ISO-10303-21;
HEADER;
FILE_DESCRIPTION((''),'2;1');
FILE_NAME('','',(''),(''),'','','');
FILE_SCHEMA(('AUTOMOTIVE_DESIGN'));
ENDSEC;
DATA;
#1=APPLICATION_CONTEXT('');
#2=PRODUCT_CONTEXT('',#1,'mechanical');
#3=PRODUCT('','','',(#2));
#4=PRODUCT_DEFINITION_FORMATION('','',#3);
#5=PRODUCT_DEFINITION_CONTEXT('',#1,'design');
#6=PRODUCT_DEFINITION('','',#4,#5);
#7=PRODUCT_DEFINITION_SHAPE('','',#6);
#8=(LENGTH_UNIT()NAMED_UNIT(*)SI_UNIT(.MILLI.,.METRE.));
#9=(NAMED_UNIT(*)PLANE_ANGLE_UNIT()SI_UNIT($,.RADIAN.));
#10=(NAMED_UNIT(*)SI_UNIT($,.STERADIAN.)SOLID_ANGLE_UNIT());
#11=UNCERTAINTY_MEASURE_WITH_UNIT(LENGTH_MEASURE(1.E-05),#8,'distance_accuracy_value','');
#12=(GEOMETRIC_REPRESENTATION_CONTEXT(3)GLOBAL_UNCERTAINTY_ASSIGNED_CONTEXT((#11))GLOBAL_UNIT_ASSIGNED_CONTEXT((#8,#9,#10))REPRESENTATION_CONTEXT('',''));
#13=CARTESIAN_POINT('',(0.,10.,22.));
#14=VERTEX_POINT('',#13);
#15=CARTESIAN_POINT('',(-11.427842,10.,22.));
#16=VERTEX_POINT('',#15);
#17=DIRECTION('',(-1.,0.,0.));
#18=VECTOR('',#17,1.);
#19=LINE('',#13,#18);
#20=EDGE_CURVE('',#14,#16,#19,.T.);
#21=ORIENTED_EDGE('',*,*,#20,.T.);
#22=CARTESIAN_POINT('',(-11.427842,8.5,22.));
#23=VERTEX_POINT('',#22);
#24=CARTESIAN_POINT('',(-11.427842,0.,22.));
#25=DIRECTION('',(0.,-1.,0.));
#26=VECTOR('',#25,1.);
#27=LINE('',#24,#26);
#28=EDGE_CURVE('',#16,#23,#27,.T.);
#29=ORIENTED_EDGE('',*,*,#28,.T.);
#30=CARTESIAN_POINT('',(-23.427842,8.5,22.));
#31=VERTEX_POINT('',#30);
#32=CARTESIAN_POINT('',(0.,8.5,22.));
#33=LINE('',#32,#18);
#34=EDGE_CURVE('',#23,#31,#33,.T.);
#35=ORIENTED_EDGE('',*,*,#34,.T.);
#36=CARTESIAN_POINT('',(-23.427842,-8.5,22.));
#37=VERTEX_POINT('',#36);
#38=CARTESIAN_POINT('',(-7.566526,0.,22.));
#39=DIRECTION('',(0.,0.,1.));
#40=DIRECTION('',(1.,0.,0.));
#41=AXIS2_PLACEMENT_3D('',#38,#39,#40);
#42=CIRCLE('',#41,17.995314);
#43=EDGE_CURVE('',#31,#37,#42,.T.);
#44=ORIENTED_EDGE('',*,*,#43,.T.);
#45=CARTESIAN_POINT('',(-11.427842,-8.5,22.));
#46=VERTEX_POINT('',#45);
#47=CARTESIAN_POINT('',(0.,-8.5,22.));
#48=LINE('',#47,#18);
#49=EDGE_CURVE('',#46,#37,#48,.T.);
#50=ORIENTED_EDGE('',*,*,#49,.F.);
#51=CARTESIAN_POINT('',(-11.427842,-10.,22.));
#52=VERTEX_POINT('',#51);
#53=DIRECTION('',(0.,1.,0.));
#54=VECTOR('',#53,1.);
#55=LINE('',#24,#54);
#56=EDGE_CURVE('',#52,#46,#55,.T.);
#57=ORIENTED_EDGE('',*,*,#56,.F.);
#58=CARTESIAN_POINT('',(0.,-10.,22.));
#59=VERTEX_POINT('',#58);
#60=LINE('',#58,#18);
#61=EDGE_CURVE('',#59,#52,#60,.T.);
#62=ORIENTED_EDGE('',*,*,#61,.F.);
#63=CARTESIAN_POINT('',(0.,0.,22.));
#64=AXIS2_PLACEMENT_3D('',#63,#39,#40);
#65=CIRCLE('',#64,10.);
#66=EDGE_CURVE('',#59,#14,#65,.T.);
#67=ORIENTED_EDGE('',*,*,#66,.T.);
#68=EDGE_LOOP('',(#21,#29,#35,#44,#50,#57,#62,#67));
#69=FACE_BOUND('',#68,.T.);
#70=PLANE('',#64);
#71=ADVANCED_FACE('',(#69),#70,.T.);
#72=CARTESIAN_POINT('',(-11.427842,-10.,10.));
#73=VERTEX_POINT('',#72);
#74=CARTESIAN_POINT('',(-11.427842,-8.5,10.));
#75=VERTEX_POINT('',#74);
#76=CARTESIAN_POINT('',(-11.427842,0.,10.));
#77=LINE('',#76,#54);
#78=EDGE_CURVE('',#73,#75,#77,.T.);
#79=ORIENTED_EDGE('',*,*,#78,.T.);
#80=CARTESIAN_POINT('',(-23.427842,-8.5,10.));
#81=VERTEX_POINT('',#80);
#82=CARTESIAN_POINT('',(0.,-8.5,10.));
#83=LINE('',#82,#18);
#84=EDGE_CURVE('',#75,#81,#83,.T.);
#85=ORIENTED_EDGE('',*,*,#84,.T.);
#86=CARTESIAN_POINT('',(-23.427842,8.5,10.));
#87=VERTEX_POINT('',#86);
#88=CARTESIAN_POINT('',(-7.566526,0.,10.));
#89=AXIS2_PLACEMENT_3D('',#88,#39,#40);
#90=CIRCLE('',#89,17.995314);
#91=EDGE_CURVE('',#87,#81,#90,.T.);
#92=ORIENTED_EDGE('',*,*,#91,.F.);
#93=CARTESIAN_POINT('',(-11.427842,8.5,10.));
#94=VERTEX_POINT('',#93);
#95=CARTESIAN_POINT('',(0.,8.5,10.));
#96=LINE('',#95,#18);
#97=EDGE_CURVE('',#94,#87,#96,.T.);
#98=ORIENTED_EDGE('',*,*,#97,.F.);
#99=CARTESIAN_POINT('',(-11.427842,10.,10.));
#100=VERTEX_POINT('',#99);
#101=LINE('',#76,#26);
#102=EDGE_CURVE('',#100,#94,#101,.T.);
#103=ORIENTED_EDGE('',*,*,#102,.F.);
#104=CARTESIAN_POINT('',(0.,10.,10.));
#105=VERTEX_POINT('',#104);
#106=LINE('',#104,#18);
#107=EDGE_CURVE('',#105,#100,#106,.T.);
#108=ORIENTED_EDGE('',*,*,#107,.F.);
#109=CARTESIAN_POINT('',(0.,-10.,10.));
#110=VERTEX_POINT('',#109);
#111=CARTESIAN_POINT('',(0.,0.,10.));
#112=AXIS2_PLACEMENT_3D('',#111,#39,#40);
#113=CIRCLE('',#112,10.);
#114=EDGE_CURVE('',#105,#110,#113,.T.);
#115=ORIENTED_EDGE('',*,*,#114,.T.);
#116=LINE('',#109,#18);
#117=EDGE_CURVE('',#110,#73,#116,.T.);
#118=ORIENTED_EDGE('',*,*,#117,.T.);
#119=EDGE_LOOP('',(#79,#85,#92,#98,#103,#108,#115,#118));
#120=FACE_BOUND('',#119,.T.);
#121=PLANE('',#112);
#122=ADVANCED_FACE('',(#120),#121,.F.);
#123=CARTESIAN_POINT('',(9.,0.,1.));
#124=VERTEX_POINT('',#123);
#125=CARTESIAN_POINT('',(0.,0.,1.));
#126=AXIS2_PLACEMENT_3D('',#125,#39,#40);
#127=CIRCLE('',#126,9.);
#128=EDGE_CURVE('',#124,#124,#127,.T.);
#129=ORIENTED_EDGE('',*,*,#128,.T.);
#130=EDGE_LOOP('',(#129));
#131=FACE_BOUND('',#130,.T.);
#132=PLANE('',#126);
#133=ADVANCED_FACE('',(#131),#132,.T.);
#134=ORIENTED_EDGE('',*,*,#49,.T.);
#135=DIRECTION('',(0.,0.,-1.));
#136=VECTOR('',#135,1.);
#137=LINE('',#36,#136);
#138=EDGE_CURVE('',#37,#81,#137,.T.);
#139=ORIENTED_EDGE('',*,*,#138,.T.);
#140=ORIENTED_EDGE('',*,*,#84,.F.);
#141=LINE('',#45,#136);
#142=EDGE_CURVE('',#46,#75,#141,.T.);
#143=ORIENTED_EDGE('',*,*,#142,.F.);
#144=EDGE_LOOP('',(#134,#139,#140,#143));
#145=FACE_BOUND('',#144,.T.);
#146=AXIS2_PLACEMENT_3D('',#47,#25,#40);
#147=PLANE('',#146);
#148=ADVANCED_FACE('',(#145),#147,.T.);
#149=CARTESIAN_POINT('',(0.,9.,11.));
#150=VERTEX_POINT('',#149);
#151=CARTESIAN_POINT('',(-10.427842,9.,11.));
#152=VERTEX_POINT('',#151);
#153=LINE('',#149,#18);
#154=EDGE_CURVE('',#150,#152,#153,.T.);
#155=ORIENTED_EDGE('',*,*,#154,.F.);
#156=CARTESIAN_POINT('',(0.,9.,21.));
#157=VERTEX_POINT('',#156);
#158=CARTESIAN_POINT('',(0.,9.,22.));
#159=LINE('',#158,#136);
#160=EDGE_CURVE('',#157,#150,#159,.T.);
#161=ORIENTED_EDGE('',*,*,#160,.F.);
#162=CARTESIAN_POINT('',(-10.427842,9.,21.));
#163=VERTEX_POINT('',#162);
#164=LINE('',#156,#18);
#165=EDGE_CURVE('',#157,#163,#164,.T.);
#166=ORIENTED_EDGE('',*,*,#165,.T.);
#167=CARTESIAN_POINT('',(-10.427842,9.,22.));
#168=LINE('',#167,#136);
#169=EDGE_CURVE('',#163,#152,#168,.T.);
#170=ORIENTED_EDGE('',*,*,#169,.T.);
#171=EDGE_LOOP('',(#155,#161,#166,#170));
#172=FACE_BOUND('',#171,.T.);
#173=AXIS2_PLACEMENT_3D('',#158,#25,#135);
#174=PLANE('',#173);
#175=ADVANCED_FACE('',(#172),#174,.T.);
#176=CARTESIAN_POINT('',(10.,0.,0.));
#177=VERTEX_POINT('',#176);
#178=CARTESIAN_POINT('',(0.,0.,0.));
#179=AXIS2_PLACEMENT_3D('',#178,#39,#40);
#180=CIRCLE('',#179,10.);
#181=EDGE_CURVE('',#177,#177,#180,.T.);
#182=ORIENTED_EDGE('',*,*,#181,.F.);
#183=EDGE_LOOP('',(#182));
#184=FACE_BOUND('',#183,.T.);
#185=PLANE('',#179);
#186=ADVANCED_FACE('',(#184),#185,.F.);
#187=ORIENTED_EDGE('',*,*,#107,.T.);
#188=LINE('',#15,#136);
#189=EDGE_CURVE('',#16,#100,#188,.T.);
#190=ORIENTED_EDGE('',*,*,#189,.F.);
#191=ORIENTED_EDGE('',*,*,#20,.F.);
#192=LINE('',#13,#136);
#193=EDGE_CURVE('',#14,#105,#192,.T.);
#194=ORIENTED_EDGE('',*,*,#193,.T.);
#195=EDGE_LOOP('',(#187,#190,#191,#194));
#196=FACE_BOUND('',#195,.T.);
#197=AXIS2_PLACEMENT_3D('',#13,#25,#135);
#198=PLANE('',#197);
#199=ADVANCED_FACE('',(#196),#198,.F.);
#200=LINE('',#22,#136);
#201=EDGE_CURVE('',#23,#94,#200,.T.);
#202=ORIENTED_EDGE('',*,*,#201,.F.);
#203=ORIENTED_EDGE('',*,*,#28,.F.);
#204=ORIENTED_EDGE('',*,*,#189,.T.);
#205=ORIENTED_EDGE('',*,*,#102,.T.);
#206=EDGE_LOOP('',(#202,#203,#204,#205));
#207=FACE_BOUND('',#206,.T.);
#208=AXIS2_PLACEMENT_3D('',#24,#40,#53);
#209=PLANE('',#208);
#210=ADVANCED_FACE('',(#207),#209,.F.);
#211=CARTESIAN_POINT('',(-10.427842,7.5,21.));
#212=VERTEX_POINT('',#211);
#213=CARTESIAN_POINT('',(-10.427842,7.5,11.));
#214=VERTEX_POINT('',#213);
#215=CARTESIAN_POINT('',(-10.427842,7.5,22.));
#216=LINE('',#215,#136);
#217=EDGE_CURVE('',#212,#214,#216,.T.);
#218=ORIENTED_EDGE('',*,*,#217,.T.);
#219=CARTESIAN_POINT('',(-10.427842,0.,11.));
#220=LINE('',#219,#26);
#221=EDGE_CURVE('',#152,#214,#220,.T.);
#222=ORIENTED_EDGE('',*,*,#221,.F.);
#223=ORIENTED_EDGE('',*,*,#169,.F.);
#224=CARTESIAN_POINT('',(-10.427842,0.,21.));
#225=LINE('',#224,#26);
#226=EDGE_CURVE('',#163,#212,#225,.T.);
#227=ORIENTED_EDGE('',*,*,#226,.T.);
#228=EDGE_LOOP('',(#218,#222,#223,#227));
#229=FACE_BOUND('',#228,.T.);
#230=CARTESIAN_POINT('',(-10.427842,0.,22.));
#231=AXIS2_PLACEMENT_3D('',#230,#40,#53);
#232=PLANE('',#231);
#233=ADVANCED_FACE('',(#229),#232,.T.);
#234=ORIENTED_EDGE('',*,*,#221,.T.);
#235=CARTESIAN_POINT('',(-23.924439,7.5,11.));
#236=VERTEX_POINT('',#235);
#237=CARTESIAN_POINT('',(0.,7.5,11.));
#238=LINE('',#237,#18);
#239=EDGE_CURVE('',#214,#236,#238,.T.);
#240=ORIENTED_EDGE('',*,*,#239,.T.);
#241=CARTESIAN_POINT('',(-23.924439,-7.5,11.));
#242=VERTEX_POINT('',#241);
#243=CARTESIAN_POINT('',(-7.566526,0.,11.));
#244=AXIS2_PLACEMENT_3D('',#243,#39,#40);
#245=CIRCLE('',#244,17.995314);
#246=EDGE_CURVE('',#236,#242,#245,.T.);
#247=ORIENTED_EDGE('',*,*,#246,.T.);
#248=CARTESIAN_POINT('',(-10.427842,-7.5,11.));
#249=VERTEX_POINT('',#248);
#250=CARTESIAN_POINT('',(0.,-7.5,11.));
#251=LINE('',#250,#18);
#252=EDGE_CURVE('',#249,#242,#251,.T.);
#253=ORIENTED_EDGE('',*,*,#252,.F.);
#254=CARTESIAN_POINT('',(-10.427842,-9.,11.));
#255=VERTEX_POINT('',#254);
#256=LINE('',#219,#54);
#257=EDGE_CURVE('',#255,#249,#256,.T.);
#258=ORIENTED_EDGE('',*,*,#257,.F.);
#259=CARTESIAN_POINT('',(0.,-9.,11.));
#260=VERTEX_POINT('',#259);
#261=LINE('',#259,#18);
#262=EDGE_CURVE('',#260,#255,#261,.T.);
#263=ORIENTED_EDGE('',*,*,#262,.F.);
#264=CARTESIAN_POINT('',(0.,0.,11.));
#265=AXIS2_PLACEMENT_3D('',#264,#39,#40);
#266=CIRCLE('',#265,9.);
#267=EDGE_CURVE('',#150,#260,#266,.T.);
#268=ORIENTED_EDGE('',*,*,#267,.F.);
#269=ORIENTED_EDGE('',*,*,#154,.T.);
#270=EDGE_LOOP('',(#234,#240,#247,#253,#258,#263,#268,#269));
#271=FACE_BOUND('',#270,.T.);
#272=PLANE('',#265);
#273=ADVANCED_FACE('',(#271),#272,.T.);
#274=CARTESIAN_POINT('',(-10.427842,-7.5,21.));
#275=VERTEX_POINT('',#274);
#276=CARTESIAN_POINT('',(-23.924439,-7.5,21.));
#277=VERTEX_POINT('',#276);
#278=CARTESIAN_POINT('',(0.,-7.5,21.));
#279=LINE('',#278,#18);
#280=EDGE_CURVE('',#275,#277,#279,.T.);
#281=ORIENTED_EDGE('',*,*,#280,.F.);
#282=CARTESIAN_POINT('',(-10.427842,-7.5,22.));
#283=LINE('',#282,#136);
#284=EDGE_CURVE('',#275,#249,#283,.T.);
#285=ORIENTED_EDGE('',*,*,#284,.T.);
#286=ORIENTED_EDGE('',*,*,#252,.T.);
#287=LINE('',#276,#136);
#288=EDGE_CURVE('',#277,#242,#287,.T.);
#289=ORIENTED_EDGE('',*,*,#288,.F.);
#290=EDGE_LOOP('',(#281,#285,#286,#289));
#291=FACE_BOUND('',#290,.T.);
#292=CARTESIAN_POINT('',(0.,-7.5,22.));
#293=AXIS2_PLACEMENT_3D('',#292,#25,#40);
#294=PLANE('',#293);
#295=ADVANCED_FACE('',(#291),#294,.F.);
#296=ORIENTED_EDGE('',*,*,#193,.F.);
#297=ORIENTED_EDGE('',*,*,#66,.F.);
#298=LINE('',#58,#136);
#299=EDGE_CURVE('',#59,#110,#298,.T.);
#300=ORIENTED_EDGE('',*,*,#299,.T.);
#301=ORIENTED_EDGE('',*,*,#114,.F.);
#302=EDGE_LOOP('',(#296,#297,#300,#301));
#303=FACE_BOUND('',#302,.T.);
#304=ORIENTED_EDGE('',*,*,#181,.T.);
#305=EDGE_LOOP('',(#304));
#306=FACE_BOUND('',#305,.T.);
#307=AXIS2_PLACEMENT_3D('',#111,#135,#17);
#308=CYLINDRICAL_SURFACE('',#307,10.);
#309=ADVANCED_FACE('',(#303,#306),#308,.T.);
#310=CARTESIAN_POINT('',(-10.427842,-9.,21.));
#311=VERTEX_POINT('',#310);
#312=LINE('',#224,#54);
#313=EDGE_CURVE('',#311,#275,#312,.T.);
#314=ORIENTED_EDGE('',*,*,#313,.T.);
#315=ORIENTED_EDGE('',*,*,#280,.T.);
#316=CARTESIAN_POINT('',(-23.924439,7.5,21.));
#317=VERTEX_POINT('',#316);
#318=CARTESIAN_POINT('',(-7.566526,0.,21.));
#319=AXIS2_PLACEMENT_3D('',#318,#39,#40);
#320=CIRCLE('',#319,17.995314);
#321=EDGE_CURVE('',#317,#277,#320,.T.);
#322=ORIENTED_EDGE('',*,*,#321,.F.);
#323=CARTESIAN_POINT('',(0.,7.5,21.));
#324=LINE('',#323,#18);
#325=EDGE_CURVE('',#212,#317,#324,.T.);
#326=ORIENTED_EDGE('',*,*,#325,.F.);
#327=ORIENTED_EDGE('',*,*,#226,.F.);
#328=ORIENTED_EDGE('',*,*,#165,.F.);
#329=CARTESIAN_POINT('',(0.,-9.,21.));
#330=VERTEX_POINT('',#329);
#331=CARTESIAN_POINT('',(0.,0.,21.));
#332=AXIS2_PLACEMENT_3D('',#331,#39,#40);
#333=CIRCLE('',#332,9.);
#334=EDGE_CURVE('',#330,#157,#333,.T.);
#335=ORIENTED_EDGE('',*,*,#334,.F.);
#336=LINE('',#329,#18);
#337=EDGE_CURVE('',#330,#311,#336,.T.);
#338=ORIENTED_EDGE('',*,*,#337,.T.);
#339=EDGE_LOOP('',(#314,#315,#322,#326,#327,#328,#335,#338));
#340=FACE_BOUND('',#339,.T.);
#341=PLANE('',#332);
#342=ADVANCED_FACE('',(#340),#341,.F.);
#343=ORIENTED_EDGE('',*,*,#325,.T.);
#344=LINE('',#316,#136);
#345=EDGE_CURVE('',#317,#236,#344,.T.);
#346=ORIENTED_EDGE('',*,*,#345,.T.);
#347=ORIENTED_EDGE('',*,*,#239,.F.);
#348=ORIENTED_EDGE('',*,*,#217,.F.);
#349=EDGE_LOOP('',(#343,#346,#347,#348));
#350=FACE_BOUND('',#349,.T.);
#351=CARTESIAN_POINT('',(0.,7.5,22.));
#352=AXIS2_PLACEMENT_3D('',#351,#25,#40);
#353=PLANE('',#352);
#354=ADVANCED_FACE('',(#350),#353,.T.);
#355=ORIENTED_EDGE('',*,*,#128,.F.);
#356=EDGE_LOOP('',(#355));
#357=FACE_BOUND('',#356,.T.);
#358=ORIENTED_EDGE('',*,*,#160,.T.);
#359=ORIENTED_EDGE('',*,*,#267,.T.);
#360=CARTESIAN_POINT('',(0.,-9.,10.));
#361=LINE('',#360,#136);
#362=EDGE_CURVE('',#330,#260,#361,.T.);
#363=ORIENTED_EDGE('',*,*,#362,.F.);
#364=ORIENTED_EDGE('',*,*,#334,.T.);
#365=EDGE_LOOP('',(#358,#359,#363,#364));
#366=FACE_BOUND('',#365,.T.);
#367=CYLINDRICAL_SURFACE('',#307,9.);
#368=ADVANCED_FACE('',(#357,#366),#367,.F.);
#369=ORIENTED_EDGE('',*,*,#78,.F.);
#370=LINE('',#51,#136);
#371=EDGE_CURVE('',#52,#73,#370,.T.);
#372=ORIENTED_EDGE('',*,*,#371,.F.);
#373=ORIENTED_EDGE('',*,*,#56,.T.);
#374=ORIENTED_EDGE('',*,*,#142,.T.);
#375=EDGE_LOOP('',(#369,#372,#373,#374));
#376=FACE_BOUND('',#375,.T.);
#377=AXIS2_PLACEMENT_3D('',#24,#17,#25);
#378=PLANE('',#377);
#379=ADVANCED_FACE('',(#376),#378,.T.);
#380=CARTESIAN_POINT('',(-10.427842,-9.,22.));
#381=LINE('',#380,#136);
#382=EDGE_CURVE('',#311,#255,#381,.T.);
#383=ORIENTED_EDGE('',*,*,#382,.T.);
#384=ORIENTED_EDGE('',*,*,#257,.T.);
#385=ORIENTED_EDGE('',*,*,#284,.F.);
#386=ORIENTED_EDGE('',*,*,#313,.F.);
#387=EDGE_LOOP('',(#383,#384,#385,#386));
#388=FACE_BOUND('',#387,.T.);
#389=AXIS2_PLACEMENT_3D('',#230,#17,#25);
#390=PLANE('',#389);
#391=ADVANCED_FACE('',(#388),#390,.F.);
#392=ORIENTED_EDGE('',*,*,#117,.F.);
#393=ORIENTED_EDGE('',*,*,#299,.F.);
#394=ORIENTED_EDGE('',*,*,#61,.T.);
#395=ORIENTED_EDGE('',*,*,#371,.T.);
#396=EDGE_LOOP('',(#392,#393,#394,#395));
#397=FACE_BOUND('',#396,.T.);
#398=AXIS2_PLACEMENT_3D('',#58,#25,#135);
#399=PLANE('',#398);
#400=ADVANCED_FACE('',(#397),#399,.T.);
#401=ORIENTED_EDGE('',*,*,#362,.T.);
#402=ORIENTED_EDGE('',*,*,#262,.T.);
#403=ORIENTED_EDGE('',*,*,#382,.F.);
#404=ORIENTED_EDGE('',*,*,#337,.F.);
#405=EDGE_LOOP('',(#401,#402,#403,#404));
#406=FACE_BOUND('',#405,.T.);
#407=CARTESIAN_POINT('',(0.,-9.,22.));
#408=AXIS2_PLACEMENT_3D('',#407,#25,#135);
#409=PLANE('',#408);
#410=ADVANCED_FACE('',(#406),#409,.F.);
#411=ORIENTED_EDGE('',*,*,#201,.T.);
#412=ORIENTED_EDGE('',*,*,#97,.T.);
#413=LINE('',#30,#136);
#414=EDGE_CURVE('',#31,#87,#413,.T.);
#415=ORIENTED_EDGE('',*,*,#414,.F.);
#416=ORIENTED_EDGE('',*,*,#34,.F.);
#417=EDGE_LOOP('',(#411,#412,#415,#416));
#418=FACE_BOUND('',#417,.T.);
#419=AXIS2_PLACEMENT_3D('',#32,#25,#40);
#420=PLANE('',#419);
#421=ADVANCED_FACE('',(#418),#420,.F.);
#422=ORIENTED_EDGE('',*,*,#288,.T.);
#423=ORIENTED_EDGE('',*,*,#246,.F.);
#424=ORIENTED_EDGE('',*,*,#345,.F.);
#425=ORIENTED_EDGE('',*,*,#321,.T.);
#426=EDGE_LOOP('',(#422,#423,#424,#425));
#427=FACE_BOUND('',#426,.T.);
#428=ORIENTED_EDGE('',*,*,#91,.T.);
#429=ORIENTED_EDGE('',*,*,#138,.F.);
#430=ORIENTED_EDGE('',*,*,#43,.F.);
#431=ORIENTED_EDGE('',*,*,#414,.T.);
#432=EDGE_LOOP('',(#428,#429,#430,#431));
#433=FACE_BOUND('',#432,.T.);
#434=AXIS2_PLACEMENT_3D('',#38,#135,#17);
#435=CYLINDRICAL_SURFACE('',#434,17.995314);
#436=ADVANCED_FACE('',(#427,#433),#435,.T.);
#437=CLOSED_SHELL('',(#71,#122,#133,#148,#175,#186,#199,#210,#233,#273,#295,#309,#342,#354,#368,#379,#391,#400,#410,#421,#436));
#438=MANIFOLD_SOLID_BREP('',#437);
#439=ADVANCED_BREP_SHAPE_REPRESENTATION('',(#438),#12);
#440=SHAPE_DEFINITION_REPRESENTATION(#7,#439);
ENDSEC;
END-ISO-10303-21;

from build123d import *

# Parameters (mm, degrees)
ESQUISSE1_R        = 10
BOSS_EXTRU_1_DEPTH = 10
BOSS_EXTRU_4_DEPTH = 12
COQUE1_START       = 11
COQUE1_DEPTH       = 10
COQUE1_START_2     = 1
COQUE1_2_OUTLINE_R = 9
COQUE1_2_DEPTH     = 10


# Read off the part's stored shape, not the designer's step: Coque1
with BuildPart() as part:
    # Esquisse1 → Boss.-Extru.1 (new body)
    with BuildSketch(Plane.XY):
        Circle(ESQUISSE1_R)
    extrude(amount=BOSS_EXTRU_1_DEPTH)

    # Esquisse5 → Boss.-Extru.4 (add)
    with BuildSketch(Plane.XY.offset(10)):
        with BuildLine():
            Line((-11.427841592, -10), (0, -10))
            ThreePointArc((0, -10), (10, 0), (0, 10))
            Line((0, 10), (-11.427841592, 10))
            Line((-11.427841592, 10), (-11.427841592, 8.5))
            Line((-11.427841592, 8.5), (-23.427841592, 8.5))
            ThreePointArc((-23.427841592, 8.5), (-25.561840174, 0), (-23.427841592, -8.5))
            Line((-23.427841592, -8.5), (-11.427841592, -8.5))
            Line((-11.427841592, -8.5), (-11.427841592, -10))
        make_face()
    extrude(amount=BOSS_EXTRU_4_DEPTH)

    # Coque1 outline → Coque1 (cut)
    with BuildSketch(Plane.XY.offset(COQUE1_START)):
        with BuildLine():
            ThreePointArc((0, -9), (9, 0), (0, 9))
            Line((0, 9), (-10.427841592, 9))
            Line((-10.427841592, 9), (-10.427841592, 7.5))
            Line((-10.427841592, 7.5), (-23.924439446, 7.5))
            ThreePointArc((-23.924439446, 7.5), (-25.561840174, 0), (-23.924439446, -7.5))
            Line((-23.924439446, -7.5), (-10.427841592, -7.5))
            Line((-10.427841592, -7.5), (-10.427841592, -9))
            Line((-10.427841592, -9), (0, -9))
        make_face()
    extrude(amount=COQUE1_DEPTH, mode=Mode.SUBTRACT)

    # Coque1 2 outline → Coque1 2 (cut)
    with BuildSketch(Plane.XY.offset(COQUE1_START_2)):
        Circle(COQUE1_2_OUTLINE_R)
    extrude(amount=COQUE1_2_DEPTH, mode=Mode.SUBTRACT)


solid = part.part
